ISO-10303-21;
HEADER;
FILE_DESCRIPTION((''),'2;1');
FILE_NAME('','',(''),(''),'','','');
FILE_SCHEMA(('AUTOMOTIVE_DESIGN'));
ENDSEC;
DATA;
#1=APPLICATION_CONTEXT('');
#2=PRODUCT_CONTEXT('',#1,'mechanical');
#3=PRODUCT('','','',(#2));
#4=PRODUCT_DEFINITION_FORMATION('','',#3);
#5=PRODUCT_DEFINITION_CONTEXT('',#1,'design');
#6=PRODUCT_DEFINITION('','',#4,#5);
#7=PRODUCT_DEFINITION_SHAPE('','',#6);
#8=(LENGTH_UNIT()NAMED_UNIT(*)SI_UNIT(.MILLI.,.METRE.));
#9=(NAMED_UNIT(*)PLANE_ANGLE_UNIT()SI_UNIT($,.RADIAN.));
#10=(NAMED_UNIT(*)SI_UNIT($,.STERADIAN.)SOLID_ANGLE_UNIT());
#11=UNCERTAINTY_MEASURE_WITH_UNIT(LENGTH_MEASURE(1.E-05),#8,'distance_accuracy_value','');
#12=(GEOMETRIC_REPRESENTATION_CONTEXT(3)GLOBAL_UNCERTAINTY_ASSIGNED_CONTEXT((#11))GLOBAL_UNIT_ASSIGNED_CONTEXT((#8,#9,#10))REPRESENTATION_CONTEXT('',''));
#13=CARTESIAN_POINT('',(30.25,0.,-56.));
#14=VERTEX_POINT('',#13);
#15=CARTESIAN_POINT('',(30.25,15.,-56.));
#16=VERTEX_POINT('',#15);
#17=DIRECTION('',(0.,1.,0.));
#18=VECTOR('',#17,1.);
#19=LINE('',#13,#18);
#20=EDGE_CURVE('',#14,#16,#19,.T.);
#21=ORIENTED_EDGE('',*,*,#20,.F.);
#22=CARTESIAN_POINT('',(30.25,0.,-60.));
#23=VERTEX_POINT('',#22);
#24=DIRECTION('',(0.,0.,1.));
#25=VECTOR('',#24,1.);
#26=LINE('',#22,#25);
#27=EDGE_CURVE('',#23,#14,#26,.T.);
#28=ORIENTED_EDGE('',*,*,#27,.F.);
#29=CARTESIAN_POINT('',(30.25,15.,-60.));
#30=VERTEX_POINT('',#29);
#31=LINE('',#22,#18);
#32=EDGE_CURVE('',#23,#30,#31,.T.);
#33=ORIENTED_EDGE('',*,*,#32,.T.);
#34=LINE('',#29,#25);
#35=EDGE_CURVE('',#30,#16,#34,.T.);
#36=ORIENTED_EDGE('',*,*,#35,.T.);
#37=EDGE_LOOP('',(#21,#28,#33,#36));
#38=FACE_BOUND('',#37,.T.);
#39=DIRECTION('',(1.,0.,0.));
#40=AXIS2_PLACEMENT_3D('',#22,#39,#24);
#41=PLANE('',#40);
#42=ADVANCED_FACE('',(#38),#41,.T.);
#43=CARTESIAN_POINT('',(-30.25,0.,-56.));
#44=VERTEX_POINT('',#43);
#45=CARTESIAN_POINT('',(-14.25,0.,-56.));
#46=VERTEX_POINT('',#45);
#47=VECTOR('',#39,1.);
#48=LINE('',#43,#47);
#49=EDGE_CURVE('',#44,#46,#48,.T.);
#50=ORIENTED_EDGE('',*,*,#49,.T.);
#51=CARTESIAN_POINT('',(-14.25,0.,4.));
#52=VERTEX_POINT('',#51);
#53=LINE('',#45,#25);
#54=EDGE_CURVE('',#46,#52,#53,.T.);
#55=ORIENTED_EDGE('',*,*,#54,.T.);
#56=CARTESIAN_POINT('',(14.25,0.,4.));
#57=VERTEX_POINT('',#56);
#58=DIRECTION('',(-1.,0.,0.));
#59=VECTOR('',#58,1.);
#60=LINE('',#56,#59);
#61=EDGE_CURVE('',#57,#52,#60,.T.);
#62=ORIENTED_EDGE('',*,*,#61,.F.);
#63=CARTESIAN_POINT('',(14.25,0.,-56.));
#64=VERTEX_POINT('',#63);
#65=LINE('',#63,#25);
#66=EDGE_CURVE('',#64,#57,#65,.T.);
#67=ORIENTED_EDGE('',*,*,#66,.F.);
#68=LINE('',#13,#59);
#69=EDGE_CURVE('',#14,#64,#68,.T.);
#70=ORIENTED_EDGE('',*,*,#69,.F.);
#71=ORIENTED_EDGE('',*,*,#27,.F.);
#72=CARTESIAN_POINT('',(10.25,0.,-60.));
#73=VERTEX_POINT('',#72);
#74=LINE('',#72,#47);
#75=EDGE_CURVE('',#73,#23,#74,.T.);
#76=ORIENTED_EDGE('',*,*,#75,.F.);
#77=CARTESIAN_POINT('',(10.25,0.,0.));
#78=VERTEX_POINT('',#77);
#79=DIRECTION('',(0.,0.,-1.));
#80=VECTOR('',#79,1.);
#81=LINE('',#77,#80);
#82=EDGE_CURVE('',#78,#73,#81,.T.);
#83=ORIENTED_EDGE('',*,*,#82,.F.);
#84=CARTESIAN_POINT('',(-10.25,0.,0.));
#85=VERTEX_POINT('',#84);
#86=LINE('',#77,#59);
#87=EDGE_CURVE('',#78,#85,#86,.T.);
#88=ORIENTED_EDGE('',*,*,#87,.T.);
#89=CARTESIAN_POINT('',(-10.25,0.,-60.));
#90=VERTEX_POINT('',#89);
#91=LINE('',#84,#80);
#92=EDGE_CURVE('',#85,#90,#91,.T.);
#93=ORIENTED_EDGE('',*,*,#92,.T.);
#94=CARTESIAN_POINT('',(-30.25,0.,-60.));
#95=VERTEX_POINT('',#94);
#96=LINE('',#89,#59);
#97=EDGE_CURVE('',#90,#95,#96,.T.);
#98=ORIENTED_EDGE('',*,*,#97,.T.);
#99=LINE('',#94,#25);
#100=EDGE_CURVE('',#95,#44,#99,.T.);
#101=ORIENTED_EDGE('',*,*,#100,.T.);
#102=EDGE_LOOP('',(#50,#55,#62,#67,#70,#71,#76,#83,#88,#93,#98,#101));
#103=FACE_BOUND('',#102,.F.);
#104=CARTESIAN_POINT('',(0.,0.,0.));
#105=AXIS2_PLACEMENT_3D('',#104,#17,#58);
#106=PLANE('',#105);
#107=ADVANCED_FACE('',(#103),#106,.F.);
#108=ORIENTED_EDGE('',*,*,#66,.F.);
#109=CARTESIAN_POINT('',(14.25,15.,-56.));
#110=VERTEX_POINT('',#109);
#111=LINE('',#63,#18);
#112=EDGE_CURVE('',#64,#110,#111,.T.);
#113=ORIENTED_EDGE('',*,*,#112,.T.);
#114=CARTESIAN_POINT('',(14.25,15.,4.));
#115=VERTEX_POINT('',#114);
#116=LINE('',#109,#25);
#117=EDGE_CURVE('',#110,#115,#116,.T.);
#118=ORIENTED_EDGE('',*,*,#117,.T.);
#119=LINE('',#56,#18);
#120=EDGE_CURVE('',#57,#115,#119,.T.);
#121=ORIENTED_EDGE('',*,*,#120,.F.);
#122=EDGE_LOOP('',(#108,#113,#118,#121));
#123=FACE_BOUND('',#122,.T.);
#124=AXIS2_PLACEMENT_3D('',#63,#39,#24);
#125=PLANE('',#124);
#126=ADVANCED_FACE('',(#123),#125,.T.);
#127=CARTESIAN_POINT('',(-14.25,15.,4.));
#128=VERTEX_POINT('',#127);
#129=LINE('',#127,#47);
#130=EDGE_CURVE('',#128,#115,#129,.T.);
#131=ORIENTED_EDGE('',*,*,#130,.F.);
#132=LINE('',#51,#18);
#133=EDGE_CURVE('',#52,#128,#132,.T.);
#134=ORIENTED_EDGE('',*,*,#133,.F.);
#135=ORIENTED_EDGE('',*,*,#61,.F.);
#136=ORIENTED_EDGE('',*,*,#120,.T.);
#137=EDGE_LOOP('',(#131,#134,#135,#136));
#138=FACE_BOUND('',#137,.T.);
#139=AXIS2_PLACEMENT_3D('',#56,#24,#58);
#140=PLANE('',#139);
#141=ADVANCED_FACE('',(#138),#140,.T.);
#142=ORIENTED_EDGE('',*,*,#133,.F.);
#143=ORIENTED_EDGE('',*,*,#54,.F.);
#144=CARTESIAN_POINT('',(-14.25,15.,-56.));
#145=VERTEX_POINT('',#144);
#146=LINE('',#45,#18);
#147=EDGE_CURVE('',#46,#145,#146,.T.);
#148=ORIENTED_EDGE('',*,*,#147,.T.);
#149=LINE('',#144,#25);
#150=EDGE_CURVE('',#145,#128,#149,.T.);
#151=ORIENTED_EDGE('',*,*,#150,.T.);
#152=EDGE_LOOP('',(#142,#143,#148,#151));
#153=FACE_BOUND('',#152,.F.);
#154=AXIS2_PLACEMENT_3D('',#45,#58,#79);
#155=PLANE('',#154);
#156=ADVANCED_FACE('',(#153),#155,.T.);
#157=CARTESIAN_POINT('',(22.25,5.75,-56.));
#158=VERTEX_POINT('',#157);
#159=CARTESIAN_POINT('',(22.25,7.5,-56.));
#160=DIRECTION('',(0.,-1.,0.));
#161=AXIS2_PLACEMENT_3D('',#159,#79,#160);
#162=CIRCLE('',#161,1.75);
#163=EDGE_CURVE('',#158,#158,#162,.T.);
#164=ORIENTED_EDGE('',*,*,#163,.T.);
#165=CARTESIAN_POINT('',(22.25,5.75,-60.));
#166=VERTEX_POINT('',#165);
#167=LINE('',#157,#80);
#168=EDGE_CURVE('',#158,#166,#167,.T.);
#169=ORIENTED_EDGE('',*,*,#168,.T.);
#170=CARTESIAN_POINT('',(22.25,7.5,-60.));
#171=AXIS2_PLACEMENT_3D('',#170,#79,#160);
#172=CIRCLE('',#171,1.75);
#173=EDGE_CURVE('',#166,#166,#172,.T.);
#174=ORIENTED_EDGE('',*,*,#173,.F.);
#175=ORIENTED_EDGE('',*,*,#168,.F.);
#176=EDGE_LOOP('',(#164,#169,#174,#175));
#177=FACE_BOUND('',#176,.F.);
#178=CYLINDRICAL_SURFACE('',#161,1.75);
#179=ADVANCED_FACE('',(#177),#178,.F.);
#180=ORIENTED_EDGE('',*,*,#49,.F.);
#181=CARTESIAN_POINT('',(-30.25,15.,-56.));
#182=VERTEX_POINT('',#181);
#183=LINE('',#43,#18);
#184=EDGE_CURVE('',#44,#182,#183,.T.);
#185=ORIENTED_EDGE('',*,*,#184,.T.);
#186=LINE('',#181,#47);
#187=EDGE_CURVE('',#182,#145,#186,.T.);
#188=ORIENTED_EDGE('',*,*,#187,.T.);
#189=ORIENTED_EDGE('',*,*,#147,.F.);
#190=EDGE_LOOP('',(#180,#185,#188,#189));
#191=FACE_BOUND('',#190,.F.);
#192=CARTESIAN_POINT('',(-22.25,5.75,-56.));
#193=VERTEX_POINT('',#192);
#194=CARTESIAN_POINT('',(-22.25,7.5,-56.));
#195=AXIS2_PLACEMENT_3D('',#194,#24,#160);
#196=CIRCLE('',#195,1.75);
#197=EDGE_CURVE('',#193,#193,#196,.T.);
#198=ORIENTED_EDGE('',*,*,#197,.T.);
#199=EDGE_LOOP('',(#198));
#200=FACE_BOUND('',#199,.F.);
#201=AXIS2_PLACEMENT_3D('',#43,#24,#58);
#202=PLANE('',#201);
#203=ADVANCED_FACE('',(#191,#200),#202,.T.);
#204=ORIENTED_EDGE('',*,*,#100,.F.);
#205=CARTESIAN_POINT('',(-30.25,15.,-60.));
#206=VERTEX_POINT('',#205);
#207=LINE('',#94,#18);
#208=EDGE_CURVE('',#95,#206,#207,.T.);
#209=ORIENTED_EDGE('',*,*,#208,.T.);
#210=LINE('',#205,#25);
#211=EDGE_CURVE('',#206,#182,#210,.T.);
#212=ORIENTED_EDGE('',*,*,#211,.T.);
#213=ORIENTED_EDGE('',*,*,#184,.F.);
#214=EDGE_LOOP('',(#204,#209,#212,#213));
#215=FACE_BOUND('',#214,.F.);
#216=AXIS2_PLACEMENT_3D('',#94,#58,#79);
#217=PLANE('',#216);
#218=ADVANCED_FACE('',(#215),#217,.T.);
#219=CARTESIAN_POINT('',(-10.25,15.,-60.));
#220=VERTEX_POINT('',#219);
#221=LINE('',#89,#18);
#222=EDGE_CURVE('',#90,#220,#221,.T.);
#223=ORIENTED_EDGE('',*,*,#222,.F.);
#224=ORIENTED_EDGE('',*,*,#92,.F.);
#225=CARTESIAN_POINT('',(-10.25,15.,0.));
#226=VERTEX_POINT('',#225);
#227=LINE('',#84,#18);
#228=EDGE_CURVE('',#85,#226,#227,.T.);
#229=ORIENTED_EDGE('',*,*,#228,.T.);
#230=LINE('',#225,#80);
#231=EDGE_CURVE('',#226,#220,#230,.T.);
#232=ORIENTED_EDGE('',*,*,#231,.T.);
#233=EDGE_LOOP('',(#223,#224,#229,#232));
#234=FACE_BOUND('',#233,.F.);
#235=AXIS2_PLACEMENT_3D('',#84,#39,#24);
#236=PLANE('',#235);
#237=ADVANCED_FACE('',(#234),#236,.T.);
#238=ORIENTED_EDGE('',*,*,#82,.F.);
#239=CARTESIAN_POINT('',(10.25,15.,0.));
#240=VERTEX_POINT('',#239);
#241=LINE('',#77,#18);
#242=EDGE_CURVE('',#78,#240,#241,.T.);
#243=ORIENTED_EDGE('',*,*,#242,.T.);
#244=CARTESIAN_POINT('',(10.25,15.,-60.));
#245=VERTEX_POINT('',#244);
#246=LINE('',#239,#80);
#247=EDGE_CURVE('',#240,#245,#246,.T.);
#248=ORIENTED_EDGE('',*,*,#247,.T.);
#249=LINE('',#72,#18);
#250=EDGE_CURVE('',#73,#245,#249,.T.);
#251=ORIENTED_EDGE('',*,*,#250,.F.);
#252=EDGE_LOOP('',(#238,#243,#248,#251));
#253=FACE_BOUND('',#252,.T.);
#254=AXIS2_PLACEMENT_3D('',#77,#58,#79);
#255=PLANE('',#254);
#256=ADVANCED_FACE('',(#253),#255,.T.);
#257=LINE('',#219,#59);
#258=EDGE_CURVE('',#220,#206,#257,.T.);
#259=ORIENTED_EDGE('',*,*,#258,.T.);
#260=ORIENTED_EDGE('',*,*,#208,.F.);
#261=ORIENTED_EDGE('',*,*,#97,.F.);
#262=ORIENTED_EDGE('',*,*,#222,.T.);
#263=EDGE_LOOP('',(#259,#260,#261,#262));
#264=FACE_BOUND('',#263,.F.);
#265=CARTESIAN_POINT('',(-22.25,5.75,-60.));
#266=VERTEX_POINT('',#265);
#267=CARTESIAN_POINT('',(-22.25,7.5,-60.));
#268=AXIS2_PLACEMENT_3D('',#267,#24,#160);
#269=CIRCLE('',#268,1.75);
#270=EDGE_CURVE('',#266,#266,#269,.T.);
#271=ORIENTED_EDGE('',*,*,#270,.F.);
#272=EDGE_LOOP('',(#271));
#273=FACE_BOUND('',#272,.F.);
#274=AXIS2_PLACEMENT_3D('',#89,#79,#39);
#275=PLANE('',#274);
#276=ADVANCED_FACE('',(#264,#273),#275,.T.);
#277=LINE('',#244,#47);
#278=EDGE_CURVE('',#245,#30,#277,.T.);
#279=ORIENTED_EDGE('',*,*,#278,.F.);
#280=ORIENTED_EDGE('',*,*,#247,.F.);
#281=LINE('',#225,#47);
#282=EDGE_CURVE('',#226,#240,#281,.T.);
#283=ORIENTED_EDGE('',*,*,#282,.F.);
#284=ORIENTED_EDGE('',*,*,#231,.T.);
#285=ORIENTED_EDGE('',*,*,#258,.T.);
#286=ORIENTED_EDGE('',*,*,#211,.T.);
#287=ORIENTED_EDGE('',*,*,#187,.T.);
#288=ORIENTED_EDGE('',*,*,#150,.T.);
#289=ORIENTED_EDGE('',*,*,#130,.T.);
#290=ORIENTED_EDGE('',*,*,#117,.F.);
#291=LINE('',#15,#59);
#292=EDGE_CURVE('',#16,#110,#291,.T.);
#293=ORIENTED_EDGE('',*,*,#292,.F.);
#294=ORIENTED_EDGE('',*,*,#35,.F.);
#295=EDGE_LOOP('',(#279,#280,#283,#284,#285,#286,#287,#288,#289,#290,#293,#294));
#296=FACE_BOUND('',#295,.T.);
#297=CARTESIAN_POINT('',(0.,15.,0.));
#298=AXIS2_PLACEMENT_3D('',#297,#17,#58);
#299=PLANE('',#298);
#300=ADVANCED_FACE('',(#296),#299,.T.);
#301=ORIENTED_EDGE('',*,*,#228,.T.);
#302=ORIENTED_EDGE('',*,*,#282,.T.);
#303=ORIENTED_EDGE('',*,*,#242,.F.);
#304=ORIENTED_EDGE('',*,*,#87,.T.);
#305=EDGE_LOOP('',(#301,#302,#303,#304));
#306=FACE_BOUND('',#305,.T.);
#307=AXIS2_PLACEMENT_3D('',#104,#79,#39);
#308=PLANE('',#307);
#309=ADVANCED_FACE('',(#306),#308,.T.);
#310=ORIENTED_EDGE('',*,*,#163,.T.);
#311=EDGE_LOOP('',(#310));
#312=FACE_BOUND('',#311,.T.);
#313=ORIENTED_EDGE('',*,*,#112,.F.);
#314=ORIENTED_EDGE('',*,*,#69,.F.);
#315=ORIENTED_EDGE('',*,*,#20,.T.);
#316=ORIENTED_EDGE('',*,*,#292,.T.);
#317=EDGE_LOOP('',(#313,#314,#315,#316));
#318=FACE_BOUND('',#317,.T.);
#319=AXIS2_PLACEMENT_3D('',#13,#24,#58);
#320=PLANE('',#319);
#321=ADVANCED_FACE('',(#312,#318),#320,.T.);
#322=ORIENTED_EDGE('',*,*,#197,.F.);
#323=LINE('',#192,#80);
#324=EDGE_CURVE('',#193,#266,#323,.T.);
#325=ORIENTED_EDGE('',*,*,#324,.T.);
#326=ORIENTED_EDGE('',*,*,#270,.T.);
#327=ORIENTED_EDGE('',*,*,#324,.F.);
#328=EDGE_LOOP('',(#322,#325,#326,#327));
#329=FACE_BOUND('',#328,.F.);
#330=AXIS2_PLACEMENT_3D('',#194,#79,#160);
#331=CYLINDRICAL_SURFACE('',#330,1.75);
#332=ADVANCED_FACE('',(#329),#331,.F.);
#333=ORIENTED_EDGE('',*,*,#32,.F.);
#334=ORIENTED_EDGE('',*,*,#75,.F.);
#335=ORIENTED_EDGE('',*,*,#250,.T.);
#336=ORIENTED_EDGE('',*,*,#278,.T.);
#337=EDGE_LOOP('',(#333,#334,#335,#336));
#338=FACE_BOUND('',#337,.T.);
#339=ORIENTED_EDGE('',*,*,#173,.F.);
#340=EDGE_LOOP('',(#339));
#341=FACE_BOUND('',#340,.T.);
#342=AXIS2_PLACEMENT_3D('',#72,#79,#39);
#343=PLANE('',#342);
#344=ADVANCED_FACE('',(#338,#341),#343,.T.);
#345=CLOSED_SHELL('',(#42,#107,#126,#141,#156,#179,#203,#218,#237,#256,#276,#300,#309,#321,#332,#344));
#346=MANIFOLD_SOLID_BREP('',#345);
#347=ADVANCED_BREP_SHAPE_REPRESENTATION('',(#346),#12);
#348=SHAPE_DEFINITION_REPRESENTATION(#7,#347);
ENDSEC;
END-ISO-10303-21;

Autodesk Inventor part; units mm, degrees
ref_plane "YZ Plane" through (0, 0, 0) normal (1, 0, 0) x (0, 1, 0)
ref_plane "XZ Plane" through (0, 0, 0) normal (0, 1, 0) x (-1, 0, 0)
ref_plane "XY Plane" through (0, 0, 0) normal (0, 0, 1) x (1, 0, 0)
sketch "Sketch1" plane through (0, 0, 0) normal (0, 1, 0) x (-1, 0, 0)
  line L0 (0, 0) -> (-10.25, 0)
  line L1 (-10.25, 0) -> (-10.25, -60)
  line L2 (-14.25, 4) -> (0, 4)
  line L3 (0, 4) -> (0, 0)
  line L4 (-10.25, -60) -> (-30.25, -60)
  line L5 (-30.25, -60) -> (-30.25, -56)
  line L6 (-30.25, -56) -> (-14.25, -56)
  line L7 (-14.25, -56) -> (-14.25, 4)
  dimension "d0" = 10.25
  dimension "d1" = 60
  dimension "d3" = 4
  dimension "d4" = 20
  dimension "d5" = 4
  dimension "d6" = 4
extrude "Extrusion1" add sketch "Sketch1" along normal blind 15
sketch "Sketch2" plane through (14.25, 0, -56) normal (0, 0, 1) x (1, 0, 0)
  line L0 (0, 15) -> (16, 0) construction
  line L1 (0, 0) -> (16, 15) construction
  point P0 (-14.25, 0)
  point P1 (8, 7.5)
hole "Hole1" at (22.25, 7.5, -56) direction (0, 0, -1) diameter 3.5 depth 8 tip angle 118
mirror "Mirror1" about plane through (0, 0, 0) normal (-1, 0, 0)
properties part number "clip" material "ABS Plastic"
